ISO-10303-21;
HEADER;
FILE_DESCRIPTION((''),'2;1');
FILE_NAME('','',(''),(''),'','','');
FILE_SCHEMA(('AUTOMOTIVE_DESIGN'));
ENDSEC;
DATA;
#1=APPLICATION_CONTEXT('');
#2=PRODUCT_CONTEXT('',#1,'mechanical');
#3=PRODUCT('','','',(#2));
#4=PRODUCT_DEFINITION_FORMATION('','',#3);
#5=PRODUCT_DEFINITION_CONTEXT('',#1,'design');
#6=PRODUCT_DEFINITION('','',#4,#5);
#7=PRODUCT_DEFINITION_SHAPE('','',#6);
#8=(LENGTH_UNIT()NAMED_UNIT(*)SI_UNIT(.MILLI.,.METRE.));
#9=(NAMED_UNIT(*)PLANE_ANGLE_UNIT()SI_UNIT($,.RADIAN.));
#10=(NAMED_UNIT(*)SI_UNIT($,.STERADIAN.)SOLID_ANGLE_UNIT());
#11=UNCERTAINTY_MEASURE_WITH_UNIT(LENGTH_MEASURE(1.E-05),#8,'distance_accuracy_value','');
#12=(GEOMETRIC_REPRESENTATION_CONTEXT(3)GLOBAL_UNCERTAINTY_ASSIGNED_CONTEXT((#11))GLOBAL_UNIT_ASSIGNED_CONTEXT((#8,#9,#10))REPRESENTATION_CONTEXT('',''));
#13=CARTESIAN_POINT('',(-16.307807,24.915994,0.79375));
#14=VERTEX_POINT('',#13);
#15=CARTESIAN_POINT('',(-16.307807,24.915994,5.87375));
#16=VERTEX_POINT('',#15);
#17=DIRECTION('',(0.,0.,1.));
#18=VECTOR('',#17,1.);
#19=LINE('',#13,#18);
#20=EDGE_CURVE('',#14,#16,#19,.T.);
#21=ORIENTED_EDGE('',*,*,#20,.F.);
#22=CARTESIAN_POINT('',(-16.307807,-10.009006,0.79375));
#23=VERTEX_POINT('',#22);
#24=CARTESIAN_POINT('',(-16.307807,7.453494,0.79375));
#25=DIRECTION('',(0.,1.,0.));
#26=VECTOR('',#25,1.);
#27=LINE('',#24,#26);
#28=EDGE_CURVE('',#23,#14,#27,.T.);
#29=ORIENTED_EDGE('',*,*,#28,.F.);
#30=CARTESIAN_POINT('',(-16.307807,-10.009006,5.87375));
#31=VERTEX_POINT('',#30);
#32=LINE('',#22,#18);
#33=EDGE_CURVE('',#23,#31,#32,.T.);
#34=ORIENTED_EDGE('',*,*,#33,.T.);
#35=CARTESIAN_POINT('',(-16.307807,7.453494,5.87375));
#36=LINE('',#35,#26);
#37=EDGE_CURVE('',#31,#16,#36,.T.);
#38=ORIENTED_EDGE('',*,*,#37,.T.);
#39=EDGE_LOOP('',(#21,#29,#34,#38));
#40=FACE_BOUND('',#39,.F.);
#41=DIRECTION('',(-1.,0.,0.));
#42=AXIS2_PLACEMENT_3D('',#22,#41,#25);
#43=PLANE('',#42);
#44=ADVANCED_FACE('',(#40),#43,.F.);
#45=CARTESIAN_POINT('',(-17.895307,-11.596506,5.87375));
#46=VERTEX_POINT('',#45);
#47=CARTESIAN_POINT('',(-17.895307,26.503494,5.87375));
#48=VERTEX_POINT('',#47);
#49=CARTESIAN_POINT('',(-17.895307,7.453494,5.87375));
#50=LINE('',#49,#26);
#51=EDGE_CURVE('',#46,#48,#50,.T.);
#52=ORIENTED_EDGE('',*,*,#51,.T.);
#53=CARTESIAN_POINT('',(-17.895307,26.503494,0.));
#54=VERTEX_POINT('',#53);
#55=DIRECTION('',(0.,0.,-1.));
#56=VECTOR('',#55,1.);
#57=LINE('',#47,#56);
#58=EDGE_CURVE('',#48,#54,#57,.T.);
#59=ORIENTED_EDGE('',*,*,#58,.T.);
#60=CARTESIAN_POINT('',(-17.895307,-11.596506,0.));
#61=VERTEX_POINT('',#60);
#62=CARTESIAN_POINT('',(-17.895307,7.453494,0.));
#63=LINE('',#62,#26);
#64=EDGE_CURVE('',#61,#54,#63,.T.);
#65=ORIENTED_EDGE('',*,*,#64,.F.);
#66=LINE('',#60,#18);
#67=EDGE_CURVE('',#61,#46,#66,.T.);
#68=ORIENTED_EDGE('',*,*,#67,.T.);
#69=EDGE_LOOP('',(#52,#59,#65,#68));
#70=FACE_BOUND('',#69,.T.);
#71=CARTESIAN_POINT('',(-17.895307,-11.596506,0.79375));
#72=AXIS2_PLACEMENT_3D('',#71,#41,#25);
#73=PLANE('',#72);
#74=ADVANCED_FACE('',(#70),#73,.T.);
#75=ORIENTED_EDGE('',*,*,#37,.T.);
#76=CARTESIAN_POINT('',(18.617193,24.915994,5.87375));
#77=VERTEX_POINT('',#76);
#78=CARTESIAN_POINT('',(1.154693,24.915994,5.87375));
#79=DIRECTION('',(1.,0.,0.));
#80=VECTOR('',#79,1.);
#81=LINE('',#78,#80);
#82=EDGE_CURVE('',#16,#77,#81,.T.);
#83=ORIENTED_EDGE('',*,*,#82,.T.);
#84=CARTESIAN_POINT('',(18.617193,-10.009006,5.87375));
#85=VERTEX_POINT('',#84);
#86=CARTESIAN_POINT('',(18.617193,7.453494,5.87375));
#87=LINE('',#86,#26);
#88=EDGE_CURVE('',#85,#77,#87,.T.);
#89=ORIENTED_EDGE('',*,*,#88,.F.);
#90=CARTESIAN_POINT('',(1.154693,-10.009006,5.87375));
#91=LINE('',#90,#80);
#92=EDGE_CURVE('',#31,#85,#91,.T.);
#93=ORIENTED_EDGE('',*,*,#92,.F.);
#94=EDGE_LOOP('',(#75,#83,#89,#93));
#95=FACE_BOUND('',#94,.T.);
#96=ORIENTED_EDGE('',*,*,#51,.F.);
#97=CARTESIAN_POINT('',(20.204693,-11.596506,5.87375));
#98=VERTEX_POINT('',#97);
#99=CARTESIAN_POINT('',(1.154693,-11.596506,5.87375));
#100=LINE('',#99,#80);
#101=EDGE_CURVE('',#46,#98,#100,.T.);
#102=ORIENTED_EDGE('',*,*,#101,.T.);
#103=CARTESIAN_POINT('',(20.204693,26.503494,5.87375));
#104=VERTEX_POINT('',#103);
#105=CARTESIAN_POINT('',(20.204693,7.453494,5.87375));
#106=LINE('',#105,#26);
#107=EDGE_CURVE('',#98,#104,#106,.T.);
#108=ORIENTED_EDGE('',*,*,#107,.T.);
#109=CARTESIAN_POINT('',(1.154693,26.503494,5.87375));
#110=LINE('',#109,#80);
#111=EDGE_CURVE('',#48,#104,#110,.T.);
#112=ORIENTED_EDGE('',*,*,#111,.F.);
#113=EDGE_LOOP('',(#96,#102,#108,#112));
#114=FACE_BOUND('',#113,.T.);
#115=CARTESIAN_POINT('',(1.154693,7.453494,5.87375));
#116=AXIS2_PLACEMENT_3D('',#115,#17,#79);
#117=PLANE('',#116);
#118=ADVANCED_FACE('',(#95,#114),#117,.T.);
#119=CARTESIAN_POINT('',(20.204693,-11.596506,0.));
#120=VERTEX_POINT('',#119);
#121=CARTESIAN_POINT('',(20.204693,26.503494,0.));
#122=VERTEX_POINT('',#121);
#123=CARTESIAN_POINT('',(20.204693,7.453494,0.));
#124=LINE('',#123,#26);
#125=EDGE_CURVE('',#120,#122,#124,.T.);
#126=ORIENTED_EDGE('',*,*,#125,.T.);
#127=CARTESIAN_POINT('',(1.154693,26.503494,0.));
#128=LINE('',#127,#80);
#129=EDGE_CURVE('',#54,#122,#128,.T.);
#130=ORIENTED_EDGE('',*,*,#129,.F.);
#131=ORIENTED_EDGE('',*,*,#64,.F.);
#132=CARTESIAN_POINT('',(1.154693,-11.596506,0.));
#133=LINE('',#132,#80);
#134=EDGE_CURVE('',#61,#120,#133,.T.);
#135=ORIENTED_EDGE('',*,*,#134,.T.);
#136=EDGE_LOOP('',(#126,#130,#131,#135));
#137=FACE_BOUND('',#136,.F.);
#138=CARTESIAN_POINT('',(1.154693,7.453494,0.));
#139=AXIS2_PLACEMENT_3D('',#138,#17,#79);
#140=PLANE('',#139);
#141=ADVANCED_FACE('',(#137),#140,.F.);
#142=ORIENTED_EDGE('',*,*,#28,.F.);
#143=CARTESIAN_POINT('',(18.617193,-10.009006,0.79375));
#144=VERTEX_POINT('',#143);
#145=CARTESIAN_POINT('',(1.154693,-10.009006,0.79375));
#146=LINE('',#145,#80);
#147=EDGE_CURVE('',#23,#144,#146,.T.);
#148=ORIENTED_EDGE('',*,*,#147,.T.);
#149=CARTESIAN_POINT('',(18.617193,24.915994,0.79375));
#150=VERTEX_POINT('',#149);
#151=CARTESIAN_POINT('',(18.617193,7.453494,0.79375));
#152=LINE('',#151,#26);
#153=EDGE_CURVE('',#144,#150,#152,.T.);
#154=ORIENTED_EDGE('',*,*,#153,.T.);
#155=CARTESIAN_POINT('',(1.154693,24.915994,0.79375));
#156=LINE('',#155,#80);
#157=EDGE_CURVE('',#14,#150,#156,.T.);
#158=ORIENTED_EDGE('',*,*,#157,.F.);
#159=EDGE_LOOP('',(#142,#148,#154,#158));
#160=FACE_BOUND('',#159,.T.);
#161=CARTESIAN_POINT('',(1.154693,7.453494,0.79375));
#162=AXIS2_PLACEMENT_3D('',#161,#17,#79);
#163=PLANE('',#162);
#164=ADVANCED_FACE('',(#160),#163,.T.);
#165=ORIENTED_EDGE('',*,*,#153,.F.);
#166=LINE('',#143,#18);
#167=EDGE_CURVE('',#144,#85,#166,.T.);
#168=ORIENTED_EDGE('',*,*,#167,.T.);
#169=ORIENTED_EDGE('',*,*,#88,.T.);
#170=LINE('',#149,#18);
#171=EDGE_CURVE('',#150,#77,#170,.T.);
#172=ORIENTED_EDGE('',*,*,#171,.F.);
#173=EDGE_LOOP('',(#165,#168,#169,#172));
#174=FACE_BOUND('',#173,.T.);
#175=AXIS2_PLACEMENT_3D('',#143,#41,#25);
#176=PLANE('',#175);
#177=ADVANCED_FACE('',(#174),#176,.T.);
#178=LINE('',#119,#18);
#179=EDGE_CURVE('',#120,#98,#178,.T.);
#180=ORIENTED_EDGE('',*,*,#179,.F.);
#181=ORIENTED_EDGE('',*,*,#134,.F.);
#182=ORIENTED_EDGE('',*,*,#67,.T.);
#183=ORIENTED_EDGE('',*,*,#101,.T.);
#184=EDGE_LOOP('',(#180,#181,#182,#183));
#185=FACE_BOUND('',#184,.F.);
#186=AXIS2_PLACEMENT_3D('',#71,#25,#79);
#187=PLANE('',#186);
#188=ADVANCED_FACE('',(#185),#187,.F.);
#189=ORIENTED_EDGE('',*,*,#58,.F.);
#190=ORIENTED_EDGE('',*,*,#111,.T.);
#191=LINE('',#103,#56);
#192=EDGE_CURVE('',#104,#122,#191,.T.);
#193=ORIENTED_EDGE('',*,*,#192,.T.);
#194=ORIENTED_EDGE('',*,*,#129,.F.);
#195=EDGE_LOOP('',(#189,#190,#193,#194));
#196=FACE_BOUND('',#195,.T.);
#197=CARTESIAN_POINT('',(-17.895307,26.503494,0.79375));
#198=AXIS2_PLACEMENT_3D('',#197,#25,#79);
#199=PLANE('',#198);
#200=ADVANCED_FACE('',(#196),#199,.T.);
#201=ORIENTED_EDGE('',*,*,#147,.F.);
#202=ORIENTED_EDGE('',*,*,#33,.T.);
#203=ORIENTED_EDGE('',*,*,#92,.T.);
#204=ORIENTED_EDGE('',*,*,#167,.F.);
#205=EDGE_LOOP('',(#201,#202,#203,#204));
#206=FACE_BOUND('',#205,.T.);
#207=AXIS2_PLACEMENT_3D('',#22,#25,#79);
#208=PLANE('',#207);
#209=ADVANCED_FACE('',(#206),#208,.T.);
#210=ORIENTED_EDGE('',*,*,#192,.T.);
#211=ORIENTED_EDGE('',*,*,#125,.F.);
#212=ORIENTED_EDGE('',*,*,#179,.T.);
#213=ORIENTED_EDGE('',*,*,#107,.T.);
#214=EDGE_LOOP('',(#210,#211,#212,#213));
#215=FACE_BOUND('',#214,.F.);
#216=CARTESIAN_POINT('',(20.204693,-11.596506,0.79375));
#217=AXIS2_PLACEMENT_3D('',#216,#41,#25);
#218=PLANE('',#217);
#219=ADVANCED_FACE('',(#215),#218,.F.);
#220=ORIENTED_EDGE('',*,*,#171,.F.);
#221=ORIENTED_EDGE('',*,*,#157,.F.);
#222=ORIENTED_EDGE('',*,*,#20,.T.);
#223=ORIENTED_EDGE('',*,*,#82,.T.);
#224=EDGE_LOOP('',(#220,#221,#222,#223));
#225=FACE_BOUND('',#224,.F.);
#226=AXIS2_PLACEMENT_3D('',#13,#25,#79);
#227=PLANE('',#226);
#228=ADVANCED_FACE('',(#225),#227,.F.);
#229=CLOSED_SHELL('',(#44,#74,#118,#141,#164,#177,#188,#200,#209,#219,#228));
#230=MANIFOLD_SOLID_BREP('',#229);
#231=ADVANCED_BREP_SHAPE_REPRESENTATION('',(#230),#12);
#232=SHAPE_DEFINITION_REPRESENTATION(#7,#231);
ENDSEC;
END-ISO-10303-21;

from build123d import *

# Parameters (mm, degrees)
F0_W     = 38.1
F0_H     = 38.1
F1_DEPTH = 0.79375
F2_W     = 38.1
F2_H     = 38.1
F2_W_2   = 34.925
F2_H_2   = 34.925
F3_DEPTH = 5.08


# Not quite as in the source:
# - the program builds the solid bodies; features that only make, move or delete a surface that nothing else refers to are left out


with BuildPart() as f1:
    # F0 (on Top) → F1 (new body)
    with BuildSketch(Plane.XY):
        with Locations((1.1546928436, 7.4534941071)):
            Rectangle(F0_W, F0_H)
    extrude(amount=F1_DEPTH)

    # F2 (on face) → F3 (join)
    with BuildSketch(Plane.XY.offset(0.79375)):
        with Locations((1.1546928436, 7.4534941071)):
            Rectangle(F2_W, F2_H)
        with Locations((1.1546928436, 7.4534941071)):
            Rectangle(F2_W_2, F2_H_2, mode=Mode.SUBTRACT)
    extrude(amount=F3_DEPTH)


solid = f1.part
